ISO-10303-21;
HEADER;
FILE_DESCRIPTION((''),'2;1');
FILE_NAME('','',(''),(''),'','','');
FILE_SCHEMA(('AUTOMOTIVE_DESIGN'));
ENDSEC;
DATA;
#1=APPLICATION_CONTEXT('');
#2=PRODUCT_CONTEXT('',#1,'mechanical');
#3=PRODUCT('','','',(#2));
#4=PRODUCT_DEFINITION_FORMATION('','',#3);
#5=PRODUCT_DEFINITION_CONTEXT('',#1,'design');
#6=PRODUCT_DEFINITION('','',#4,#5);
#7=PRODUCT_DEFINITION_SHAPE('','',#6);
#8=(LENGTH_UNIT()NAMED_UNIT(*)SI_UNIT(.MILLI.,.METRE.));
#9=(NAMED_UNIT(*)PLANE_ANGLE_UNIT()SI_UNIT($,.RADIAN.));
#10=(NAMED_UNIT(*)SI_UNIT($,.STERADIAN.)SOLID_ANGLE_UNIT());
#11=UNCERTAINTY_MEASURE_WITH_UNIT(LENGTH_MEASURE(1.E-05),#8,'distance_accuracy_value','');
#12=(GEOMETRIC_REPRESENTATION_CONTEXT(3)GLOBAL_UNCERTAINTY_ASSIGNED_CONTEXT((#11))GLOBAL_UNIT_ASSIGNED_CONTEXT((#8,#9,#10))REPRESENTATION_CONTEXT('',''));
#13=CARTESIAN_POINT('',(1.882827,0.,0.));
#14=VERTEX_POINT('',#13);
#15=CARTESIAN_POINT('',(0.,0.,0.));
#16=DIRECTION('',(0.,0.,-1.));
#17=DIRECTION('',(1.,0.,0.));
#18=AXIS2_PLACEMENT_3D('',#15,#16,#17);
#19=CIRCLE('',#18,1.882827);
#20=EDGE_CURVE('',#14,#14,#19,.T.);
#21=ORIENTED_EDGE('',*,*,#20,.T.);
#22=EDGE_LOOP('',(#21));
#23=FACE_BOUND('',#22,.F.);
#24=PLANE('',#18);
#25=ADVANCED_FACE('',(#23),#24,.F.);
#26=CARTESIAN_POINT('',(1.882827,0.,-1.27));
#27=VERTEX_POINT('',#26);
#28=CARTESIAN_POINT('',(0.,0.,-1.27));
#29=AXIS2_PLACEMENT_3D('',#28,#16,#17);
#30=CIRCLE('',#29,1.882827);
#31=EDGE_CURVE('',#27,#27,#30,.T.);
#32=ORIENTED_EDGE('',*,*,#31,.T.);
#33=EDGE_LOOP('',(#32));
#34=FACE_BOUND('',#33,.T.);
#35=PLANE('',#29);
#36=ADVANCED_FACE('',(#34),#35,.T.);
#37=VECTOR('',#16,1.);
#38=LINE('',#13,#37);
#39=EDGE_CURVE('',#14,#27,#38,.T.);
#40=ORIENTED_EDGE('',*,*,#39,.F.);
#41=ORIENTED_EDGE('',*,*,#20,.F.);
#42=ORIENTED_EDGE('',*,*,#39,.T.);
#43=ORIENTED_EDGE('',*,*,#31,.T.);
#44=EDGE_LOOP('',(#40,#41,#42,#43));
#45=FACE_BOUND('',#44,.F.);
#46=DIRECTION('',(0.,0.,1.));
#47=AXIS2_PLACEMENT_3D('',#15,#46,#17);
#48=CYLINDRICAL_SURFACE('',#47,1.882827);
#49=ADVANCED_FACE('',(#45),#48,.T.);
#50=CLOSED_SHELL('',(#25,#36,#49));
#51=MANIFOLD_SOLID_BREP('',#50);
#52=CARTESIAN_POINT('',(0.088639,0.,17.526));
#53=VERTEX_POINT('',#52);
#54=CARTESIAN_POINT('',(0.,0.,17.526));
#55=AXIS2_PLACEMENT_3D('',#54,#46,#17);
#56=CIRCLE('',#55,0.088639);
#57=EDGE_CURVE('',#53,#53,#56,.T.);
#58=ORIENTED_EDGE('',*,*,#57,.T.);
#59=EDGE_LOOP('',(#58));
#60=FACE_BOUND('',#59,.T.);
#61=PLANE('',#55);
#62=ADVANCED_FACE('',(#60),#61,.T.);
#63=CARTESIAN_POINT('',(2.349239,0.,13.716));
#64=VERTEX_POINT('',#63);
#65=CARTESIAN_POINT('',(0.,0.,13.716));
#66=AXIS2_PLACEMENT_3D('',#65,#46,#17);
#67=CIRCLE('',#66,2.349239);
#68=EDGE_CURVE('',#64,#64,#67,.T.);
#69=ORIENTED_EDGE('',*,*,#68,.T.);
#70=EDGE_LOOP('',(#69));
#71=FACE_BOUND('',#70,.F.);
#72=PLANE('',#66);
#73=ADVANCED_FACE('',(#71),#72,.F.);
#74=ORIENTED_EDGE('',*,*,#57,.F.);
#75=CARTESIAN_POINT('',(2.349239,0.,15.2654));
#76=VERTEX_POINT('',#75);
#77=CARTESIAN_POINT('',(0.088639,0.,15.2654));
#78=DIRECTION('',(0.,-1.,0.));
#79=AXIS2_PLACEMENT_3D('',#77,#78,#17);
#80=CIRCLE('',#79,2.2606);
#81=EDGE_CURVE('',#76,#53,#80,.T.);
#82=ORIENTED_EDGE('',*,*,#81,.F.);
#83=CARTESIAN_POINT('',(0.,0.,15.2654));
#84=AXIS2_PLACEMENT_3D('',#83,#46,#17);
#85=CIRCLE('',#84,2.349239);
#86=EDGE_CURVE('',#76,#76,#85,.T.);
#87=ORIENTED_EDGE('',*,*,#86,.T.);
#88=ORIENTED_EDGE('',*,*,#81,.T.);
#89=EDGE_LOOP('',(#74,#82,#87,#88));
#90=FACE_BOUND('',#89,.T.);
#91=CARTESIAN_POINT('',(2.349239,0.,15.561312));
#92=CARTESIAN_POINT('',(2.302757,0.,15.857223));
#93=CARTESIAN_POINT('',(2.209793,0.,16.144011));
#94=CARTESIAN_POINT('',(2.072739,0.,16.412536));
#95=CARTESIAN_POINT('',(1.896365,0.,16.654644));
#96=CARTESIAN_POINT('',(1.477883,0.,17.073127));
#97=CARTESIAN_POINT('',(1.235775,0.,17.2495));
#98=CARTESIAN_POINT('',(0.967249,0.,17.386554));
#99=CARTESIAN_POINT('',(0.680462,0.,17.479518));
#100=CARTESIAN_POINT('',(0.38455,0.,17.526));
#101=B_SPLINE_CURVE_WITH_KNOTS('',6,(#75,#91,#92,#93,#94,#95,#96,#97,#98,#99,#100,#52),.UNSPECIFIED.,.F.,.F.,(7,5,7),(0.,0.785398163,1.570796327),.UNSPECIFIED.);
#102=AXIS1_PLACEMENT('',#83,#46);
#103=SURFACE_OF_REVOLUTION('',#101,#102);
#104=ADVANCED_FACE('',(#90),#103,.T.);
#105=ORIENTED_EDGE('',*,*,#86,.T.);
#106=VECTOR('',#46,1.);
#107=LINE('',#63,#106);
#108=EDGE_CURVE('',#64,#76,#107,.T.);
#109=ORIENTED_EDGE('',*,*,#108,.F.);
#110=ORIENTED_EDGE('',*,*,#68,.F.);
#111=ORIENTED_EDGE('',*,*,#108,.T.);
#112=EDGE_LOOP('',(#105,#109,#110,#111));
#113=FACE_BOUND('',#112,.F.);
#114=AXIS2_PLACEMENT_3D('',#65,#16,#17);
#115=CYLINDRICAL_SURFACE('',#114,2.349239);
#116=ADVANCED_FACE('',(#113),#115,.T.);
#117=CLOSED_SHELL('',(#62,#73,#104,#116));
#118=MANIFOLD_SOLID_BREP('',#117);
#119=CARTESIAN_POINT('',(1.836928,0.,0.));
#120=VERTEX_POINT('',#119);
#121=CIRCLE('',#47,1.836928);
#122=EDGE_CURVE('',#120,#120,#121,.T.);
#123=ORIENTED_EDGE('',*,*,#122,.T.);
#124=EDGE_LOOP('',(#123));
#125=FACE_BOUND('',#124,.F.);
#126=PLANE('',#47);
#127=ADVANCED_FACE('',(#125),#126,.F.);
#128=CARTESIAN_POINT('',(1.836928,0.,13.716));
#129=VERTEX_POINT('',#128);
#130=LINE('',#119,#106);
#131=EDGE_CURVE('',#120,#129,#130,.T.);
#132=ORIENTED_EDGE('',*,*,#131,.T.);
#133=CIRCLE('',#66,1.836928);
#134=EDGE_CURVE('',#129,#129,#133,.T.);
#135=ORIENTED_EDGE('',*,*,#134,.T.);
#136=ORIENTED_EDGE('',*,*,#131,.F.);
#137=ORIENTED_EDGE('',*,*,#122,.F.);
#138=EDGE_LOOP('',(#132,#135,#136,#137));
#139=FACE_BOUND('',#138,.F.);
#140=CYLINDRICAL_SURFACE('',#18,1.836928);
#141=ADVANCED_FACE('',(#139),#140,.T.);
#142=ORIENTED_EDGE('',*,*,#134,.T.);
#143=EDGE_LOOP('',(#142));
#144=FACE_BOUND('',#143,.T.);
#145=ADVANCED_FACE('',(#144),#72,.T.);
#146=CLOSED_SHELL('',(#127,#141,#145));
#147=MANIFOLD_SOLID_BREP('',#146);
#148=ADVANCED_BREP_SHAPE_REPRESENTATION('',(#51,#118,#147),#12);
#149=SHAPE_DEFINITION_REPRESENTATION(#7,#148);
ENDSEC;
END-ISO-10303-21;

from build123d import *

# Parameters (mm, degrees)
F0_R     = 1.8369282596
F1_DEPTH = 13.716
F2_R     = 2.3492385246
F3_DEPTH = 3.81
F4_R     = 2.2606
F5_R     = 1.8828271996
F5_R_2   = 1.8369282596
F6_DEPTH = 1.27


with BuildPart() as f1:
    # F0 (on Top) → F1 (new body)
    with BuildSketch(Plane.XY):
        Circle(F0_R)
    extrude(amount=F1_DEPTH)


with BuildPart() as f3:
    # F2 (on face) → F3 (new body)
    with BuildSketch(Plane.XY.offset(13.716)):
        Circle(F2_R)
    extrude(amount=F3_DEPTH)

    # F4
    f4_edges = [f3.edges().sort_by_distance(p)[0] for p in [
        (-2.349239, 0, 17.526),
    ]]
    fillet(f4_edges, radius=F4_R)


with BuildPart() as f6:
    # F5 (on face) → F6 (new body)
    with BuildSketch(Plane(origin=(0, 0, 0), x_dir=(1, 0, 0), z_dir=(0, 0, -1))):
        Circle(F5_R)
        Circle(F5_R_2, mode=Mode.SUBTRACT)
        Circle(F5_R_2)
    extrude(amount=F6_DEPTH)


solid = Compound([f1.part, f3.part, f6.part])
